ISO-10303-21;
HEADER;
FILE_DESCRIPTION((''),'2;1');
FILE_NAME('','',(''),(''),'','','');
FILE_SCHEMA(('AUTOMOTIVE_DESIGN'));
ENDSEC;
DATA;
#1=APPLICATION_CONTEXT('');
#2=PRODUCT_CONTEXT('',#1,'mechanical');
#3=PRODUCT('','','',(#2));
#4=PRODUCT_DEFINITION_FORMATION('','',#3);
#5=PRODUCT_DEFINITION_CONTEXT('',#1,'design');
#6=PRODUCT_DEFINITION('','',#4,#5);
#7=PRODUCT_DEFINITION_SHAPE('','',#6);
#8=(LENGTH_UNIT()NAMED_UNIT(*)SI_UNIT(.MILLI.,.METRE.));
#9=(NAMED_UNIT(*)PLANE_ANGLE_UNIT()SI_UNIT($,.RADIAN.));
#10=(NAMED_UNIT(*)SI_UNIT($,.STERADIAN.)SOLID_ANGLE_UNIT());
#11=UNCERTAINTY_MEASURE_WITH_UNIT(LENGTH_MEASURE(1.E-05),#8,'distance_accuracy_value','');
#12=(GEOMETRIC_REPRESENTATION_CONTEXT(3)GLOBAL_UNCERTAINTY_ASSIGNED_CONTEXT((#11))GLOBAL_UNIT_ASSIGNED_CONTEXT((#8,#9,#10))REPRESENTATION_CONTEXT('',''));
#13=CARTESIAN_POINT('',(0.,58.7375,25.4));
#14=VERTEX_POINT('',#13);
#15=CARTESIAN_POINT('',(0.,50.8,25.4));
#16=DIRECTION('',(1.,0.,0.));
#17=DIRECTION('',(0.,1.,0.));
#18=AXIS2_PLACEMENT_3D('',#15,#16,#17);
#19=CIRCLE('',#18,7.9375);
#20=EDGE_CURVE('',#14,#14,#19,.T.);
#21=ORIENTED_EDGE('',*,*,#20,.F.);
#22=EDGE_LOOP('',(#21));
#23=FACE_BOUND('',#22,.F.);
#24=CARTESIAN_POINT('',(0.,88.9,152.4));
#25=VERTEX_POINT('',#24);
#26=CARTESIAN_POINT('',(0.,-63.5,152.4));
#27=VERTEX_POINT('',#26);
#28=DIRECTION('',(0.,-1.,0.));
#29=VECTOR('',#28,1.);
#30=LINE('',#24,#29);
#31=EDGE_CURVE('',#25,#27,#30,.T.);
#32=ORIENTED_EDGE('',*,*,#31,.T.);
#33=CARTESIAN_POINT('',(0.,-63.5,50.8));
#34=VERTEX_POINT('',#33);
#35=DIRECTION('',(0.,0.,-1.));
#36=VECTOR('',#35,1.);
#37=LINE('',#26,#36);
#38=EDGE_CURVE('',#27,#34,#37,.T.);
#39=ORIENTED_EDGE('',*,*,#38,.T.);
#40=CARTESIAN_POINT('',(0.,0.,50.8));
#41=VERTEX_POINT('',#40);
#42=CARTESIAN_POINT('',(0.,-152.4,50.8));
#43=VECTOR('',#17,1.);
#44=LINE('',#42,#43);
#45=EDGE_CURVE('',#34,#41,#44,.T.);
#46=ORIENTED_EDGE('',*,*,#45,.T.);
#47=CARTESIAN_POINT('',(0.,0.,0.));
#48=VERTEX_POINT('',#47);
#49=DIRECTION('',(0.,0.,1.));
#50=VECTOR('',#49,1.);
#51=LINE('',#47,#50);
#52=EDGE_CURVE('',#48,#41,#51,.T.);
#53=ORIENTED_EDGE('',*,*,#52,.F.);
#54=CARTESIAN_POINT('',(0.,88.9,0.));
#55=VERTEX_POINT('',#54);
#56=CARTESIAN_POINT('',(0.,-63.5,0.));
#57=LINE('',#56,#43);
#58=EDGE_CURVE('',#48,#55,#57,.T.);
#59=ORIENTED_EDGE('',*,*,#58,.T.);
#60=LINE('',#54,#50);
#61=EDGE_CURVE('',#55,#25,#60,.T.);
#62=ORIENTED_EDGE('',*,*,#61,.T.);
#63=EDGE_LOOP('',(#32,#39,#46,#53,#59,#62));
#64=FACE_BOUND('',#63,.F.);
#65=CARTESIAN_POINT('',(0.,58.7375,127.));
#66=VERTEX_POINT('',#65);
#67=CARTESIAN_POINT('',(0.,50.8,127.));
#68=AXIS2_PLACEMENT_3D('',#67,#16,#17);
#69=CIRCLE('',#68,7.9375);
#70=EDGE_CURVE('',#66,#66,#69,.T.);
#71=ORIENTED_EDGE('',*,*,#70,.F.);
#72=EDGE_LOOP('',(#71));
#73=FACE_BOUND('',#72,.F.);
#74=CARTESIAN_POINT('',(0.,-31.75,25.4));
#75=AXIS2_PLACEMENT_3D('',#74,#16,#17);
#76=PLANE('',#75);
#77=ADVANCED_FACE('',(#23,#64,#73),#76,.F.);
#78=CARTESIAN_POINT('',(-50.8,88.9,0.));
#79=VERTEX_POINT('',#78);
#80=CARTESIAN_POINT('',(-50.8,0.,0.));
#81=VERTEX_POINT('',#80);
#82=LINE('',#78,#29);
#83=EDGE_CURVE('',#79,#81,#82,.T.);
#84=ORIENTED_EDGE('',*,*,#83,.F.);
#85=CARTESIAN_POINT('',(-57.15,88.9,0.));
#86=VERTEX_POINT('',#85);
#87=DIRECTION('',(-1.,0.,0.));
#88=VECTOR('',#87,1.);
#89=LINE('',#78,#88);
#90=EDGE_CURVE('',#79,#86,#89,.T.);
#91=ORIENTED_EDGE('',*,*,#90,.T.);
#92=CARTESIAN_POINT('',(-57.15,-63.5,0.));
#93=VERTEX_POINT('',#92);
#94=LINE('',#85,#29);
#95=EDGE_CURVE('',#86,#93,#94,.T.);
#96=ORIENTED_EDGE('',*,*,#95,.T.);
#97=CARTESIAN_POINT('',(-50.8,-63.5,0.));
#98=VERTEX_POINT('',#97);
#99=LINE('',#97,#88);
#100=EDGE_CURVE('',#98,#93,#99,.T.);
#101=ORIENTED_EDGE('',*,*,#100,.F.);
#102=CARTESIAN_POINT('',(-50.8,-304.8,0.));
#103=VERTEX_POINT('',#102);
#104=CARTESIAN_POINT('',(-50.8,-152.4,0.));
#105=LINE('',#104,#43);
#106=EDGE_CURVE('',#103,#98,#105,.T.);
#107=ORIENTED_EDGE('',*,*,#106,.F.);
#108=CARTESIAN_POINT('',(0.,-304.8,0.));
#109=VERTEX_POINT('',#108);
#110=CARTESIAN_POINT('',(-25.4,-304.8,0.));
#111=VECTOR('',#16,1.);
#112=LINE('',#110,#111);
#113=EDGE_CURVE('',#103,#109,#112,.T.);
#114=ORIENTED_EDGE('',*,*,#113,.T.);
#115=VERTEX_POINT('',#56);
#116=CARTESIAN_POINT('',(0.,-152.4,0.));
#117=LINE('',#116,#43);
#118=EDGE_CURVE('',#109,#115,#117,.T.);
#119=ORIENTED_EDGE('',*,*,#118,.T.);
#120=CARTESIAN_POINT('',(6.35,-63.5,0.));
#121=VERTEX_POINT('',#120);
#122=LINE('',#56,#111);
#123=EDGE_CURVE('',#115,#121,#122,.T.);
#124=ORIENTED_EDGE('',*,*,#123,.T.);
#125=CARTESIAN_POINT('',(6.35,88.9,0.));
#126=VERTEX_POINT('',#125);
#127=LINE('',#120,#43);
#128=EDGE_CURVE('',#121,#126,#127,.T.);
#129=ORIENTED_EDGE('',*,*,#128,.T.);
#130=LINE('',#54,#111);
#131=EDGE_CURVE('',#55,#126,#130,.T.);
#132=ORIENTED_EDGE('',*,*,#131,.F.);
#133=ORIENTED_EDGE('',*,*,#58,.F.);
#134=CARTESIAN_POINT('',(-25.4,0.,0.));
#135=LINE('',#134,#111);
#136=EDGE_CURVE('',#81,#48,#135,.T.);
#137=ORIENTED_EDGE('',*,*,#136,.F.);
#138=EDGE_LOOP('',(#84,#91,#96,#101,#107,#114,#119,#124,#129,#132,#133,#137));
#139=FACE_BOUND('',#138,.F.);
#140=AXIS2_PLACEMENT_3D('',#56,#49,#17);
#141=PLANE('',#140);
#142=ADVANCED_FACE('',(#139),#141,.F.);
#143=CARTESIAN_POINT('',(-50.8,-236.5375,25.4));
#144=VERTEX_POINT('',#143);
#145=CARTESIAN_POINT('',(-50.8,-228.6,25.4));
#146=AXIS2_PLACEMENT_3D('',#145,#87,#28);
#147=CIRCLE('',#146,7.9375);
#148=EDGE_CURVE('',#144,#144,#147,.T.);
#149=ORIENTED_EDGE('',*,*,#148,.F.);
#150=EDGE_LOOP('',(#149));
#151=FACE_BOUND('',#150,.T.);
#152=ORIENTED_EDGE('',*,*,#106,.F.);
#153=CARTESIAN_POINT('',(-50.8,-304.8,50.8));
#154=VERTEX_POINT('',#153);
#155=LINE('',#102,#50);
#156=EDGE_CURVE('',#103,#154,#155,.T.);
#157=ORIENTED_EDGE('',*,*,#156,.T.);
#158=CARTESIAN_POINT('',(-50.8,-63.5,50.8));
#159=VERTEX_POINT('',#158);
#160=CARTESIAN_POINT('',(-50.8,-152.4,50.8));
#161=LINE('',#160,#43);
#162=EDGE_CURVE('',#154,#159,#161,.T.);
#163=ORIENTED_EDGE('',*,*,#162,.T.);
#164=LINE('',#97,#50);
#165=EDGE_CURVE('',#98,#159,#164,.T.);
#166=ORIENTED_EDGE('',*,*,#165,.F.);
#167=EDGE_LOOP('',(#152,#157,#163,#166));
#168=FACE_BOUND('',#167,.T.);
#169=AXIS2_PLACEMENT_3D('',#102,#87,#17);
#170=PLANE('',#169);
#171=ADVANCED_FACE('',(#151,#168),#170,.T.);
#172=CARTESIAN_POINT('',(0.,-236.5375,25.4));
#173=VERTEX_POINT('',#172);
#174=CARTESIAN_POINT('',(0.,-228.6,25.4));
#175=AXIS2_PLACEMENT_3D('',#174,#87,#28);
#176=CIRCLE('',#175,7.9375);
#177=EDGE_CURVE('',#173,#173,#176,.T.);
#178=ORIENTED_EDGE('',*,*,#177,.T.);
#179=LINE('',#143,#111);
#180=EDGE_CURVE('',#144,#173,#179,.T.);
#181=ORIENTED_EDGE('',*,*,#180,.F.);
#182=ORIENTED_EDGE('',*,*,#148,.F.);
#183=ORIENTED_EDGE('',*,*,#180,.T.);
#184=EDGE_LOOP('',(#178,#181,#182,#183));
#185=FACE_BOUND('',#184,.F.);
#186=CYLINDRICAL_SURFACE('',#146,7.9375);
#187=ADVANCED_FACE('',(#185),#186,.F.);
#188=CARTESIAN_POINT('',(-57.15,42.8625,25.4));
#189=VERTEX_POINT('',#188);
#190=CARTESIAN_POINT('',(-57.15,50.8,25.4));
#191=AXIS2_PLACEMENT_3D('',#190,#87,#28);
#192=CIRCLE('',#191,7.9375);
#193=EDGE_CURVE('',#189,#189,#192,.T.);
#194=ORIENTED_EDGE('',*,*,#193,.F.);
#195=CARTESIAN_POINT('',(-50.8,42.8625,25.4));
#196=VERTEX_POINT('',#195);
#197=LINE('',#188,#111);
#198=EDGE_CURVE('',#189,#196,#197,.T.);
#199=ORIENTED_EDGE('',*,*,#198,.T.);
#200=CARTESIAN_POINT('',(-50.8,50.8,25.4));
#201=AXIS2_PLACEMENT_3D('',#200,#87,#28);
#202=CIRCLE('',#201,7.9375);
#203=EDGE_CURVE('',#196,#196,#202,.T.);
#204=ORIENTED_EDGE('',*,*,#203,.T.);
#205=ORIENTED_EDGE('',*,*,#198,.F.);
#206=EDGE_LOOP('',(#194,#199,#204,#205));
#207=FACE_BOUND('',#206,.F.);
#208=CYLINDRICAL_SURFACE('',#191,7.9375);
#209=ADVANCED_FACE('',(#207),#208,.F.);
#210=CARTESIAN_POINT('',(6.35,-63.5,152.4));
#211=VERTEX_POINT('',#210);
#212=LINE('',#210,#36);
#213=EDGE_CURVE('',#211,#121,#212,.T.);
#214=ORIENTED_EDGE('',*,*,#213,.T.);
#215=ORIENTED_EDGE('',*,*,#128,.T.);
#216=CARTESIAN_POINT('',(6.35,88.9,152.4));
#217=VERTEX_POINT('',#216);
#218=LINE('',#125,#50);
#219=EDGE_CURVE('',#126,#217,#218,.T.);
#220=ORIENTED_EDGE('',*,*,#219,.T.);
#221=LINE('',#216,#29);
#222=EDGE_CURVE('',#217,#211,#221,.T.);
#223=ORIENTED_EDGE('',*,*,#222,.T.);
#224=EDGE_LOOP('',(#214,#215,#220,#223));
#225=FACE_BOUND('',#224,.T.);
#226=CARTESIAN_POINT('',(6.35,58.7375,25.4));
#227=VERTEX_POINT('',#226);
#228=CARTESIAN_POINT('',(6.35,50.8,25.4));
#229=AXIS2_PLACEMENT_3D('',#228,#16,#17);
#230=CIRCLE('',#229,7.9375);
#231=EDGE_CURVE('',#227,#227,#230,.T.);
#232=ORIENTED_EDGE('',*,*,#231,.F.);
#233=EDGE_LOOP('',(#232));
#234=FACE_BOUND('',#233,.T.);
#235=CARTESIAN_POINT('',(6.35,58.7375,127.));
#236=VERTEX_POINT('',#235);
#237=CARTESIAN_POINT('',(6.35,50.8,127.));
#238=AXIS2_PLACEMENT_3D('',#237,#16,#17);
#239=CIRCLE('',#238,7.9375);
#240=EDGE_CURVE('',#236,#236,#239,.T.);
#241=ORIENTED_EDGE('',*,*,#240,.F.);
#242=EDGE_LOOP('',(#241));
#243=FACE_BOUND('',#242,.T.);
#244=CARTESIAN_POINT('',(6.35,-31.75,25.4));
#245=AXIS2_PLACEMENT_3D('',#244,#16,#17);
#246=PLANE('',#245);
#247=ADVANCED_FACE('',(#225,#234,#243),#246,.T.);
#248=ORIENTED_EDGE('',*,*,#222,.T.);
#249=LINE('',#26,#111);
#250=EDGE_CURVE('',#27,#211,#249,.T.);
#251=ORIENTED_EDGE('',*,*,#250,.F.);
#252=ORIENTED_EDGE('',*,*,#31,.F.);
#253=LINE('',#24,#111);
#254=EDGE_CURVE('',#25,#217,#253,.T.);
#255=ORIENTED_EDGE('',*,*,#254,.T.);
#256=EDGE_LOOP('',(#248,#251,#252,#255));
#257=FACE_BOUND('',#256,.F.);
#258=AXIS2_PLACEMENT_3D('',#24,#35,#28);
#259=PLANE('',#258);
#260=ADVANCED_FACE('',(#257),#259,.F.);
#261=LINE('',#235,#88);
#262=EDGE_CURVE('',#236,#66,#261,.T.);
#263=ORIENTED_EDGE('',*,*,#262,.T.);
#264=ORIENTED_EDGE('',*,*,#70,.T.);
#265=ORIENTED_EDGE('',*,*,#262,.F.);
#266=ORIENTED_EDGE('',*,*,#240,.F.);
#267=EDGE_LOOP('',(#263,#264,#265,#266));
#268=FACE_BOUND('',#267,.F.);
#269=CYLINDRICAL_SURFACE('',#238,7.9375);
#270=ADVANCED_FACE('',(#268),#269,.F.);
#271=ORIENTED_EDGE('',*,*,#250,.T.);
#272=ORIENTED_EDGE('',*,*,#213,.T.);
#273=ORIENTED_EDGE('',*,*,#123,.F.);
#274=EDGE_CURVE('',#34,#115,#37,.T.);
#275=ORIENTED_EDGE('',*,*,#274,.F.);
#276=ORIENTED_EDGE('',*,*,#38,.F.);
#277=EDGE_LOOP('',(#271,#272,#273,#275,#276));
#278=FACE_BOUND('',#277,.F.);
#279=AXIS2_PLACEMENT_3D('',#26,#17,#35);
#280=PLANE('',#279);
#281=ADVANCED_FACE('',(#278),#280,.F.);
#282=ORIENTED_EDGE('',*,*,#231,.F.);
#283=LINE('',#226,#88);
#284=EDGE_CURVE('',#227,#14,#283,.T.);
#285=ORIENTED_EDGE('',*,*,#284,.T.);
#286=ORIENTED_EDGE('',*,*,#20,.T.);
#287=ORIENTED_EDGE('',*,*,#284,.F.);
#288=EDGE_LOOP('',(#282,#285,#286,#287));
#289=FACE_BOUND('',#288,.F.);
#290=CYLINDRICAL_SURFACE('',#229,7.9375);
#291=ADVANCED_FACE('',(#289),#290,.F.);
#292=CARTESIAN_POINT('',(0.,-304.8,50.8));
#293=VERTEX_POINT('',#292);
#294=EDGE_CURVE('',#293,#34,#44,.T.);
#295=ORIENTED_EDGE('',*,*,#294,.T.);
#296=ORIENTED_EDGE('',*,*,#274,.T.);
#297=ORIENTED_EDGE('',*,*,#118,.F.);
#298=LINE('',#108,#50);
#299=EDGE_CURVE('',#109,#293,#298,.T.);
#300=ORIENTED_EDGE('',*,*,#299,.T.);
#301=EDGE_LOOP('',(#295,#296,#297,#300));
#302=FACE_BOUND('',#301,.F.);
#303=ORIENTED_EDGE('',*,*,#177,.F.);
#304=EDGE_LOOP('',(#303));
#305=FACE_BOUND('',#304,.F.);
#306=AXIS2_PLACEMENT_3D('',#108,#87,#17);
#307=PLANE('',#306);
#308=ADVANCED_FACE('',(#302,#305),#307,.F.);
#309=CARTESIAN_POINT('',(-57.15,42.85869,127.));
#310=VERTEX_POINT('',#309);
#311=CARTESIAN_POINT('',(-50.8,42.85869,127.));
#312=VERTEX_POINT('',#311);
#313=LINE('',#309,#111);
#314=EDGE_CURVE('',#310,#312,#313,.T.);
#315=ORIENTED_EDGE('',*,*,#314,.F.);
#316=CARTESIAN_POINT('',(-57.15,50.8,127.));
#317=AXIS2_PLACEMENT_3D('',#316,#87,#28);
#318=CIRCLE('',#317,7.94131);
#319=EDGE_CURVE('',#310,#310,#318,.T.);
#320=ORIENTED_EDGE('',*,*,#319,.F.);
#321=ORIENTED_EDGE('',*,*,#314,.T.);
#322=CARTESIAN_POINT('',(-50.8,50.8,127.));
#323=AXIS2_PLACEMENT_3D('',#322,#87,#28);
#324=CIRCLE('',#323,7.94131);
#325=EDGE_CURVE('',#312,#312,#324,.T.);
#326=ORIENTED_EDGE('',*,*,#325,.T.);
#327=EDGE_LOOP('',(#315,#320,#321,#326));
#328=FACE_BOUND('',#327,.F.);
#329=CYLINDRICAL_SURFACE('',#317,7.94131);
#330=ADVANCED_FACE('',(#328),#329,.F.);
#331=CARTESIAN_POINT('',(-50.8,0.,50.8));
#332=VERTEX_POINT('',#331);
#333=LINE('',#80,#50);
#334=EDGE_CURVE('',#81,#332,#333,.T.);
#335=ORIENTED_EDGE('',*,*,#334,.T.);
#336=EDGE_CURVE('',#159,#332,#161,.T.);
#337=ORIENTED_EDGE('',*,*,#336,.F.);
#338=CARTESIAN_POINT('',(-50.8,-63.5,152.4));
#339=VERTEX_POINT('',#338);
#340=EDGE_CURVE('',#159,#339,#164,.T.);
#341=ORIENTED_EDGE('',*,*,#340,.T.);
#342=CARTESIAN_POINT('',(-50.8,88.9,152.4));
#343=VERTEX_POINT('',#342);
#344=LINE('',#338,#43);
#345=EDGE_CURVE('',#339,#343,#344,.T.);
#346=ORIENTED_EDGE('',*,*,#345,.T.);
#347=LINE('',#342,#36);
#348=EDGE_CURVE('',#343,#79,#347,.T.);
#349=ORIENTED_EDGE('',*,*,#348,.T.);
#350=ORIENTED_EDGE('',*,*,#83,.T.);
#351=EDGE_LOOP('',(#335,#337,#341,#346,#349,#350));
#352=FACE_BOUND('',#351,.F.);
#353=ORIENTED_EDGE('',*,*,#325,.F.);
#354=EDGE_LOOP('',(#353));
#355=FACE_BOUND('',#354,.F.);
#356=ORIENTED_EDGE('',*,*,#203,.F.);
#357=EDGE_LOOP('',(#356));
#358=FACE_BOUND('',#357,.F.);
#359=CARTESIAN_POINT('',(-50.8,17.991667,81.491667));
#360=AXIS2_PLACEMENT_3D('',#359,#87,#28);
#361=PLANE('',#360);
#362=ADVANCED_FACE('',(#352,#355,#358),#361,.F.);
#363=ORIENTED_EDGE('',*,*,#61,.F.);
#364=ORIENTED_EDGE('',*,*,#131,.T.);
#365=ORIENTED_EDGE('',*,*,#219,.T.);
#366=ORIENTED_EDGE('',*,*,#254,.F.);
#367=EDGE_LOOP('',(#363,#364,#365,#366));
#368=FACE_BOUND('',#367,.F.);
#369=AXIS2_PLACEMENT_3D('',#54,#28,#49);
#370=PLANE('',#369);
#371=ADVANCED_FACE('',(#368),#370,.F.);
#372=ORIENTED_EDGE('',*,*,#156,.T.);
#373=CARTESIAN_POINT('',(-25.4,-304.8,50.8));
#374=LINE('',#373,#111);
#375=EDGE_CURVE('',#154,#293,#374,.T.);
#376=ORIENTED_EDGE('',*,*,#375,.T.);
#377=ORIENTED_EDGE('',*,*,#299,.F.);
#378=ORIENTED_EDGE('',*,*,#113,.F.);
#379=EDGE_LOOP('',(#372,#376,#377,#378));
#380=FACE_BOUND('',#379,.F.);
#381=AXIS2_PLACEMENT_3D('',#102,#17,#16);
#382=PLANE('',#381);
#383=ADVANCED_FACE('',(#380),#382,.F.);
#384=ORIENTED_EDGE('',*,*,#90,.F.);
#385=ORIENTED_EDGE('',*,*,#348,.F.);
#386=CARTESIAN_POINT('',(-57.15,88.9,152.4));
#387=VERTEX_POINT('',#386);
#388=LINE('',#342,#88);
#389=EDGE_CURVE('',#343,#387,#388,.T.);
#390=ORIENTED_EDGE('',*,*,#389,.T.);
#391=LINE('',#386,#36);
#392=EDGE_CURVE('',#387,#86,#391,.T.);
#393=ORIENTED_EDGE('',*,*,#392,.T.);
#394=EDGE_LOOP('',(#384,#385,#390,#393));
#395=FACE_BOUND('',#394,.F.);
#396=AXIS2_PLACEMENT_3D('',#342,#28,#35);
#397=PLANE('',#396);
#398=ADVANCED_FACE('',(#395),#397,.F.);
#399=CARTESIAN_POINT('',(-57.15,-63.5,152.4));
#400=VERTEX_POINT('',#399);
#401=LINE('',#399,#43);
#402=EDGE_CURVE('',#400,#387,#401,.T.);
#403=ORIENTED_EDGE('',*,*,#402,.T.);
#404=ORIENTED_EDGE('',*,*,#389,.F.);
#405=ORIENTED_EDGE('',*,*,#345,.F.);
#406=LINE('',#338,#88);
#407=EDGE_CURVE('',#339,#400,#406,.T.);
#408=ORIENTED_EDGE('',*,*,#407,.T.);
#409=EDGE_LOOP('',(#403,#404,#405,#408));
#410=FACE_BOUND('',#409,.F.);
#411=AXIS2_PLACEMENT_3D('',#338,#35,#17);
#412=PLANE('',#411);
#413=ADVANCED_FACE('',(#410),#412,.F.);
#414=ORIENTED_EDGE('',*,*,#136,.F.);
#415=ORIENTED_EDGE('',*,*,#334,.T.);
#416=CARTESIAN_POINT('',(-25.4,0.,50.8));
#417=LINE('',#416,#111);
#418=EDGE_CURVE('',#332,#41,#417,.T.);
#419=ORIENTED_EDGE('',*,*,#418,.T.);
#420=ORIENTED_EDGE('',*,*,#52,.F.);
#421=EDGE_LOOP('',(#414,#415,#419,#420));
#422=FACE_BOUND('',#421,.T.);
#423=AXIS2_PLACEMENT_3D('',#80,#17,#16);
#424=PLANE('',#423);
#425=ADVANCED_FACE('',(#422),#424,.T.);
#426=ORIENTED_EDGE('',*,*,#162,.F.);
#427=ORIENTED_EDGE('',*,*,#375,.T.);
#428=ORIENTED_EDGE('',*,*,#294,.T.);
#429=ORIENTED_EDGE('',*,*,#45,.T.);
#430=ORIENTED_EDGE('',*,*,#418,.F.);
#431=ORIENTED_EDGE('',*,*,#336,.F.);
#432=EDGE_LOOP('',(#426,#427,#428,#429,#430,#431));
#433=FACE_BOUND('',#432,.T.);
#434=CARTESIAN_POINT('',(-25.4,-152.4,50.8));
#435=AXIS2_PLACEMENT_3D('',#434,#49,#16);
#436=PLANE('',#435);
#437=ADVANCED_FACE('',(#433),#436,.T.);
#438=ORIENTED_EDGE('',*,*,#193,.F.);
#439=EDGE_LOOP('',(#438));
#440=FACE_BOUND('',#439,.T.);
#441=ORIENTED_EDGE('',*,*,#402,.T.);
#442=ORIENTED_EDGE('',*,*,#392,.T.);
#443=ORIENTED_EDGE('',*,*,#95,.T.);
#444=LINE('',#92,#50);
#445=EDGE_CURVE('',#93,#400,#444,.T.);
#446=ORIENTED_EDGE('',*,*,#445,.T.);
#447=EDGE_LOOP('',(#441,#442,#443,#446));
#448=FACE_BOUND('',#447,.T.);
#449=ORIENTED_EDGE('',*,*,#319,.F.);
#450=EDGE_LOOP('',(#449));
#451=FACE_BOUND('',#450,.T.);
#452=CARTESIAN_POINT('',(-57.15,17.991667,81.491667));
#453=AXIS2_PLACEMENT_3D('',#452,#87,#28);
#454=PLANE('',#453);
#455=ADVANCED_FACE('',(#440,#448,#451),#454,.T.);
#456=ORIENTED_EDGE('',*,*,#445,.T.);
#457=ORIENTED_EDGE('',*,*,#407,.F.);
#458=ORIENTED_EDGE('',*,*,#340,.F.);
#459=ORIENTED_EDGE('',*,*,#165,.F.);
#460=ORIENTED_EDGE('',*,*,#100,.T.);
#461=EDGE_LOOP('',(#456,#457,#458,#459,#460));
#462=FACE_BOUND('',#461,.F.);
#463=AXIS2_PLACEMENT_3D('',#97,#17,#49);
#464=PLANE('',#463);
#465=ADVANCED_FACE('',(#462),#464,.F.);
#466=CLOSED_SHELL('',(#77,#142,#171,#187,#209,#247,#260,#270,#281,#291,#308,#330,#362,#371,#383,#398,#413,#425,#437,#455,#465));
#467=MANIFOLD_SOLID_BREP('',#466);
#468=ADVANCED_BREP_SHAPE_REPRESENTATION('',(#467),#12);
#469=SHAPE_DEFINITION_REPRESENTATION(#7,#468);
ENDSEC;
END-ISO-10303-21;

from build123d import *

# Parameters (mm, degrees)
F0_W      = 50.8
F0_H      = 304.8
F1_DEPTH  = 50.8
F2_W      = 63.5
F2_H      = 50.8
F3_DEPTH  = 6.35
F4_R      = 7.94131
F4_R_2    = 7.9375
F5_DEPTH  = 6.35
F6_R      = 7.9375
F7_DEPTH  = 50.8
F8_W      = 63.5
F8_H      = 50.8
F9_DEPTH  = 6.35
F10_R     = 7.9375
F11_DEPTH = 6.35


with BuildPart() as f1:
    # F0 (on Top) → F1 (new body)
    with BuildSketch(Plane.XY):
        with Locations((-25.4, -152.4)):
            Rectangle(F0_W, F0_H)
    extrude(amount=F1_DEPTH)

    # F2 (on face) → F3 (join)
    with BuildSketch(Plane(origin=(-50.8, 0, 0), x_dir=(0, -1, 0), z_dir=(-1, 0, 0))):
        Polygon((-88.9, 0), (0, 0), (0, 50.8), (63.5, 50.8), (63.5, 152.4), (-88.9, 152.4), align=None)
        with Locations((31.75, 25.4)):
            Rectangle(F2_W, F2_H)
    extrude(amount=F3_DEPTH)

    # F4 (on face) → F5 (cut)
    with BuildSketch(Plane(origin=(-57.15, 0, 0), x_dir=(0, -1, 0), z_dir=(-1, 0, 0))):
        with Locations((-50.8, 127)):
            Circle(F4_R)
        with Locations((-50.8, 25.4)):
            Circle(F4_R_2)
    extrude(amount=-F5_DEPTH, mode=Mode.SUBTRACT)

    # F6 (on face) → F7 (cut)
    with BuildSketch(Plane(origin=(-50.8, 0, 0), x_dir=(0, -1, 0), z_dir=(-1, 0, 0))):
        with Locations((228.6, 25.4)):
            Circle(F6_R)
    extrude(amount=-F7_DEPTH, mode=Mode.SUBTRACT)

    # F8 (on face) → F9 (join)
    with BuildSketch(Plane.YZ):
        with Locations((-31.75, 25.4)):
            Rectangle(F8_W, F8_H)
        Polygon((0, 50.8), (0, 0), (88.9, 0), (88.9, 152.4), (-63.5, 152.4), (-63.5, 50.8), align=None)
    extrude(amount=F9_DEPTH)

    # F10 (on face) → F11 (cut)
    with BuildSketch(Plane.YZ.offset(6.35)):
        with Locations((50.8, 127)):
            Circle(F10_R)
        with Locations((50.8, 25.4)):
            Circle(F10_R)
    extrude(amount=-F11_DEPTH, mode=Mode.SUBTRACT)


solid = f1.part
